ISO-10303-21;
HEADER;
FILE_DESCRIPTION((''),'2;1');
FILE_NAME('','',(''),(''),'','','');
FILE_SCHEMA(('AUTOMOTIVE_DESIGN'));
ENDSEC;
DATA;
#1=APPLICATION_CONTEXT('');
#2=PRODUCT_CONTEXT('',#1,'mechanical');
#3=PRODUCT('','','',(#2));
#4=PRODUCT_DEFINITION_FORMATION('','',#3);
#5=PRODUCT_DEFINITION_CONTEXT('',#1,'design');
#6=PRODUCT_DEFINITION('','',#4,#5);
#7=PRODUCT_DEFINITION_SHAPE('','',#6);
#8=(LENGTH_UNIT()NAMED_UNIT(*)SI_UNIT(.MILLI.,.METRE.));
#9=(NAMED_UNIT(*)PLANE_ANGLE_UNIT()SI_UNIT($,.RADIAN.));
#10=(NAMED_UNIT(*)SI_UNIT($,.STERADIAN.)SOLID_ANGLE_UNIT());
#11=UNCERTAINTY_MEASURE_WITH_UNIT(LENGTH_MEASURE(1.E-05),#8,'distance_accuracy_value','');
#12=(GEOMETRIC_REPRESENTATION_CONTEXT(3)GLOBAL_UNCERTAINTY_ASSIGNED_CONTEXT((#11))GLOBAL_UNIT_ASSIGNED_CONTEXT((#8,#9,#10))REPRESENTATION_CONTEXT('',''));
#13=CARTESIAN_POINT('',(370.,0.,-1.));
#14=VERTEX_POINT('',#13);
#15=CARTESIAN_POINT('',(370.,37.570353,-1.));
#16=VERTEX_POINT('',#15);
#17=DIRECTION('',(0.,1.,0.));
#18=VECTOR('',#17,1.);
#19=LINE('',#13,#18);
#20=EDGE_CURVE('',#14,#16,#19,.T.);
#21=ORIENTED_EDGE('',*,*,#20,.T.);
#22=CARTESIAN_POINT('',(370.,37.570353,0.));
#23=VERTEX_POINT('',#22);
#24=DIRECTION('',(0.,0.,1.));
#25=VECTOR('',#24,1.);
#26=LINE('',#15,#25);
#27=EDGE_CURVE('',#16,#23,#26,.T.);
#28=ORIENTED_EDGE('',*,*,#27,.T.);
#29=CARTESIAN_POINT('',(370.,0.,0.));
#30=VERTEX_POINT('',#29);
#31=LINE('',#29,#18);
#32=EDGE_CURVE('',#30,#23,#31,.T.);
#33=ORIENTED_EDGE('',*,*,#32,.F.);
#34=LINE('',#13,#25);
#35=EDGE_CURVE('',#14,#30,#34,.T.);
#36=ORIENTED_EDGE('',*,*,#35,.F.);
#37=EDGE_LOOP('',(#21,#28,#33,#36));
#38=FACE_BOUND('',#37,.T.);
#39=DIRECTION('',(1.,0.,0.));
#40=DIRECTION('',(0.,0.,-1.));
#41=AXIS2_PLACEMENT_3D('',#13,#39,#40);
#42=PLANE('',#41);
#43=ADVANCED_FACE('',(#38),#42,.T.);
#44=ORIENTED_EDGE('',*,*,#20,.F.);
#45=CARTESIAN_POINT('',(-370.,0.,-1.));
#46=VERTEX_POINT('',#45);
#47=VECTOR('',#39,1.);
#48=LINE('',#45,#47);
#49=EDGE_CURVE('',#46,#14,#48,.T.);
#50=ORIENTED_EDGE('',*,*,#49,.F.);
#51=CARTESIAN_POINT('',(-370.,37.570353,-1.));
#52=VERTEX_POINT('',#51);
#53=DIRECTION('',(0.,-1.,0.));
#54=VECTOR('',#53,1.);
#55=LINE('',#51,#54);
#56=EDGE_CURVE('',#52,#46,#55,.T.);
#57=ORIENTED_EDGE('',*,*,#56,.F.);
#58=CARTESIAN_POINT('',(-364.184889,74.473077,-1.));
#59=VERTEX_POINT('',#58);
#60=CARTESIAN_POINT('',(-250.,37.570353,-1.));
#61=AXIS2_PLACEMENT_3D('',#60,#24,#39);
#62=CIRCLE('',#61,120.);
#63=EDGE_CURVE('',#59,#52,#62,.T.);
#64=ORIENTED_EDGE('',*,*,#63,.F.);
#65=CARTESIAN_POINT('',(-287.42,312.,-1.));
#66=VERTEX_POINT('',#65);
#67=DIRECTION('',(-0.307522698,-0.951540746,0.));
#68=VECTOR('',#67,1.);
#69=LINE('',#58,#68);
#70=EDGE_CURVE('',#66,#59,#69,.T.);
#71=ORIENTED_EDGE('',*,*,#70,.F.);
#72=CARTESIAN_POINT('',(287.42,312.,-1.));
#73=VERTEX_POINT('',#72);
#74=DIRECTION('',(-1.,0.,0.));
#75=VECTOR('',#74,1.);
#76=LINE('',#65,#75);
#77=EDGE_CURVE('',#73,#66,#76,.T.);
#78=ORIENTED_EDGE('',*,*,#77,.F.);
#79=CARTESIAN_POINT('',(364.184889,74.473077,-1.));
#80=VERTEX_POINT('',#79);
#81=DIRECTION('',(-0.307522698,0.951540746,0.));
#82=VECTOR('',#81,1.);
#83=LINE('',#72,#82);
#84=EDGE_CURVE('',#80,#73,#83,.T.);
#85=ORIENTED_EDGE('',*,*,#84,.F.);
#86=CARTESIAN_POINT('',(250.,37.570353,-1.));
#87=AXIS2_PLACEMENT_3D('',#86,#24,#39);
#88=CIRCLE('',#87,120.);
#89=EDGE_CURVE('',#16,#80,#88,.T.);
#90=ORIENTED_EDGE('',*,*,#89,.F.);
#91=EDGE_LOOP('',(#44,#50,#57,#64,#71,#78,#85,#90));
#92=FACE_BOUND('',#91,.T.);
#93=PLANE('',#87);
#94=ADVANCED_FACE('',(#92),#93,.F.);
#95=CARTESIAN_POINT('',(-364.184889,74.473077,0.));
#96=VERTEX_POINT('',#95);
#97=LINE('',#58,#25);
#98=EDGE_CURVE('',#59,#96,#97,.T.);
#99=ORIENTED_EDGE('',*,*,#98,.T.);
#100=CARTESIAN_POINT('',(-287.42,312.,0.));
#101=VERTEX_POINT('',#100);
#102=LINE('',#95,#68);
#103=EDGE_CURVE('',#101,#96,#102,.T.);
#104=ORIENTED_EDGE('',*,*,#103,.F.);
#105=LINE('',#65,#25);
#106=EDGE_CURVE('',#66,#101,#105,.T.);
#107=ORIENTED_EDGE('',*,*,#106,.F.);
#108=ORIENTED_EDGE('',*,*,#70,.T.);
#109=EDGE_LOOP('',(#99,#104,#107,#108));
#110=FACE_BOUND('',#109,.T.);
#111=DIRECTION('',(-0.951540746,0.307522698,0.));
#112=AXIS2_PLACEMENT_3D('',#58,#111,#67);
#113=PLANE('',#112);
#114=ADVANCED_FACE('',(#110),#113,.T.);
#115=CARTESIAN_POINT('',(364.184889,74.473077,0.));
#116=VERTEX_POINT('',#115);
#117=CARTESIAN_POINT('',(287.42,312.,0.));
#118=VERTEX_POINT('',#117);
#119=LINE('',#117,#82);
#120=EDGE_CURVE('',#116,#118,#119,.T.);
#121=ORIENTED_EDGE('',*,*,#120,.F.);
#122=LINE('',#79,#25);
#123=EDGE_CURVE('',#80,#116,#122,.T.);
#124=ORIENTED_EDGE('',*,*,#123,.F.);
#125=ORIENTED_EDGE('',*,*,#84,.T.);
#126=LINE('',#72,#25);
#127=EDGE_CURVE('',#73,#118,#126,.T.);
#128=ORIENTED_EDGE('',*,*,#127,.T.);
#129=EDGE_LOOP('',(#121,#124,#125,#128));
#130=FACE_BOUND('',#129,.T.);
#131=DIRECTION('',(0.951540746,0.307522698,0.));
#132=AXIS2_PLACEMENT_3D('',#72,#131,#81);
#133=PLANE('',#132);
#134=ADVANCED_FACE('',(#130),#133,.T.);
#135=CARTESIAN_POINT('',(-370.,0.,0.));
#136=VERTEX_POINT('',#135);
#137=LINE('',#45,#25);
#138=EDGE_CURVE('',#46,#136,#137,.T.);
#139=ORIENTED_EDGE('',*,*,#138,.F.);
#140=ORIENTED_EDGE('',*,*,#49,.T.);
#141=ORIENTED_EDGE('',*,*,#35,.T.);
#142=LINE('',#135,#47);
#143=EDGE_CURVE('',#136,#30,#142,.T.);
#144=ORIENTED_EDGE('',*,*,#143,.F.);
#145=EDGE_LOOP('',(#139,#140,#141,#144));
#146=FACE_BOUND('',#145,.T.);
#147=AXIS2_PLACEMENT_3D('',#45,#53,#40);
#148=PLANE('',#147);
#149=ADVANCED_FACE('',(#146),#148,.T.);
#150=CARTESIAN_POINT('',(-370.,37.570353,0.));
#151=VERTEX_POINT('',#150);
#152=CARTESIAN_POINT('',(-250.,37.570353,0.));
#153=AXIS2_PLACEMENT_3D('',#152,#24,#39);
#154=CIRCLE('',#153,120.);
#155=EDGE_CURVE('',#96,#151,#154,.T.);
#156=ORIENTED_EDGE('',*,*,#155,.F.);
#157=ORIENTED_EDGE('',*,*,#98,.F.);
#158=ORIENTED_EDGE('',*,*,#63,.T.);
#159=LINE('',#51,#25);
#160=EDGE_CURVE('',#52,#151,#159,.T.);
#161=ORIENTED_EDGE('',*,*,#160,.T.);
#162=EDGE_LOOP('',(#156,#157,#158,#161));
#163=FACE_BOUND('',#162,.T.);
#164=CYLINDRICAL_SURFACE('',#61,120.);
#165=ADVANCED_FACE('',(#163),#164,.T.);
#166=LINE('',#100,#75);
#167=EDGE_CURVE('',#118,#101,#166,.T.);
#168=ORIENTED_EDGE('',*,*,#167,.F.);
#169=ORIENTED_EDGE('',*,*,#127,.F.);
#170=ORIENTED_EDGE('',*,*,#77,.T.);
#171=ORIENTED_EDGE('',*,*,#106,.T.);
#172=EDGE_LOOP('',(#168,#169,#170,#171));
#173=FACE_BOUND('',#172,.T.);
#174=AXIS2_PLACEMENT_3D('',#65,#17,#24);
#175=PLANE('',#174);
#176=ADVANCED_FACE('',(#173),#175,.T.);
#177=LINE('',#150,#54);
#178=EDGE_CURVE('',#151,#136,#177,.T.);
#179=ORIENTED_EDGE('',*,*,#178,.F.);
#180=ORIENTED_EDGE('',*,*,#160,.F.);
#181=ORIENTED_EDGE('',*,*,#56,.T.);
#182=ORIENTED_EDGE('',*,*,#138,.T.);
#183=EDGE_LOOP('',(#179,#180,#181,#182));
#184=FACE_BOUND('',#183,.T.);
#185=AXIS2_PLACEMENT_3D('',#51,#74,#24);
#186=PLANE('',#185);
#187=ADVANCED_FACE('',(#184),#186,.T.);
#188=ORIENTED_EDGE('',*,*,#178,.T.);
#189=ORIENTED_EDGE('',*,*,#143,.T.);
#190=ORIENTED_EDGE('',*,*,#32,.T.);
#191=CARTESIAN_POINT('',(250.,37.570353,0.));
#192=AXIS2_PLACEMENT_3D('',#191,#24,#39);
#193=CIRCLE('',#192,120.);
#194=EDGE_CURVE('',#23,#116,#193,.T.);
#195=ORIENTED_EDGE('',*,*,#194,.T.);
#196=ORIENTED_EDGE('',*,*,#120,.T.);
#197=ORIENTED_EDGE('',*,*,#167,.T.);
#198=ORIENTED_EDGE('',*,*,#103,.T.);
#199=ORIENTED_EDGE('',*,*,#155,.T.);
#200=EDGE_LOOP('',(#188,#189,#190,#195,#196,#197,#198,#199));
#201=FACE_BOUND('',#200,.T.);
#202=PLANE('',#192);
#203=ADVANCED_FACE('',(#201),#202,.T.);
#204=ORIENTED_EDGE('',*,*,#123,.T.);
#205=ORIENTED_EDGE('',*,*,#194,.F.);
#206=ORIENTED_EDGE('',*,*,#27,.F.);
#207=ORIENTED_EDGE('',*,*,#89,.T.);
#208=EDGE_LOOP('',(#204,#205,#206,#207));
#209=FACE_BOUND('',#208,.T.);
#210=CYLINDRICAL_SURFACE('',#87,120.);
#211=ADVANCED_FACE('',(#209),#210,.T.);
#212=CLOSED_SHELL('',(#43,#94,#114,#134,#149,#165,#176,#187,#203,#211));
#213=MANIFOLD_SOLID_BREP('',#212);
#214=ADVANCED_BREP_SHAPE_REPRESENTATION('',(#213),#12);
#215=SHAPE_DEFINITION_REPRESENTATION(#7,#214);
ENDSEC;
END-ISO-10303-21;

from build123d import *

# Parameters (mm, degrees)
TOP_FIREWALL_DEPTH = 1


# Sheet-metal steps are written as plain solids
with BuildPart() as part:
    # Sketch1 → Top Firewall (new body)
    with BuildSketch(Plane.XY):
        with BuildLine():
            Line((-370, 37.570353211), (-370, 0))
            Line((-370, 0), (370, 0))
            Line((370, 0), (370, 37.570353211))
            ThreePointArc((370, 37.570353211), (368.537307916, 56.249395802), (364.184889464, 74.473076931))
            Line((364.184889464, 74.473076931), (287.42, 312))
            Line((287.42, 312), (-287.42, 312))
            Line((-287.42, 312), (-364.184889464, 74.473076931))
            ThreePointArc((-364.184889464, 74.473076931), (-368.537307916, 56.249395802), (-370, 37.570353211))
        make_face()
    extrude(amount=-TOP_FIREWALL_DEPTH)


solid = part.part
